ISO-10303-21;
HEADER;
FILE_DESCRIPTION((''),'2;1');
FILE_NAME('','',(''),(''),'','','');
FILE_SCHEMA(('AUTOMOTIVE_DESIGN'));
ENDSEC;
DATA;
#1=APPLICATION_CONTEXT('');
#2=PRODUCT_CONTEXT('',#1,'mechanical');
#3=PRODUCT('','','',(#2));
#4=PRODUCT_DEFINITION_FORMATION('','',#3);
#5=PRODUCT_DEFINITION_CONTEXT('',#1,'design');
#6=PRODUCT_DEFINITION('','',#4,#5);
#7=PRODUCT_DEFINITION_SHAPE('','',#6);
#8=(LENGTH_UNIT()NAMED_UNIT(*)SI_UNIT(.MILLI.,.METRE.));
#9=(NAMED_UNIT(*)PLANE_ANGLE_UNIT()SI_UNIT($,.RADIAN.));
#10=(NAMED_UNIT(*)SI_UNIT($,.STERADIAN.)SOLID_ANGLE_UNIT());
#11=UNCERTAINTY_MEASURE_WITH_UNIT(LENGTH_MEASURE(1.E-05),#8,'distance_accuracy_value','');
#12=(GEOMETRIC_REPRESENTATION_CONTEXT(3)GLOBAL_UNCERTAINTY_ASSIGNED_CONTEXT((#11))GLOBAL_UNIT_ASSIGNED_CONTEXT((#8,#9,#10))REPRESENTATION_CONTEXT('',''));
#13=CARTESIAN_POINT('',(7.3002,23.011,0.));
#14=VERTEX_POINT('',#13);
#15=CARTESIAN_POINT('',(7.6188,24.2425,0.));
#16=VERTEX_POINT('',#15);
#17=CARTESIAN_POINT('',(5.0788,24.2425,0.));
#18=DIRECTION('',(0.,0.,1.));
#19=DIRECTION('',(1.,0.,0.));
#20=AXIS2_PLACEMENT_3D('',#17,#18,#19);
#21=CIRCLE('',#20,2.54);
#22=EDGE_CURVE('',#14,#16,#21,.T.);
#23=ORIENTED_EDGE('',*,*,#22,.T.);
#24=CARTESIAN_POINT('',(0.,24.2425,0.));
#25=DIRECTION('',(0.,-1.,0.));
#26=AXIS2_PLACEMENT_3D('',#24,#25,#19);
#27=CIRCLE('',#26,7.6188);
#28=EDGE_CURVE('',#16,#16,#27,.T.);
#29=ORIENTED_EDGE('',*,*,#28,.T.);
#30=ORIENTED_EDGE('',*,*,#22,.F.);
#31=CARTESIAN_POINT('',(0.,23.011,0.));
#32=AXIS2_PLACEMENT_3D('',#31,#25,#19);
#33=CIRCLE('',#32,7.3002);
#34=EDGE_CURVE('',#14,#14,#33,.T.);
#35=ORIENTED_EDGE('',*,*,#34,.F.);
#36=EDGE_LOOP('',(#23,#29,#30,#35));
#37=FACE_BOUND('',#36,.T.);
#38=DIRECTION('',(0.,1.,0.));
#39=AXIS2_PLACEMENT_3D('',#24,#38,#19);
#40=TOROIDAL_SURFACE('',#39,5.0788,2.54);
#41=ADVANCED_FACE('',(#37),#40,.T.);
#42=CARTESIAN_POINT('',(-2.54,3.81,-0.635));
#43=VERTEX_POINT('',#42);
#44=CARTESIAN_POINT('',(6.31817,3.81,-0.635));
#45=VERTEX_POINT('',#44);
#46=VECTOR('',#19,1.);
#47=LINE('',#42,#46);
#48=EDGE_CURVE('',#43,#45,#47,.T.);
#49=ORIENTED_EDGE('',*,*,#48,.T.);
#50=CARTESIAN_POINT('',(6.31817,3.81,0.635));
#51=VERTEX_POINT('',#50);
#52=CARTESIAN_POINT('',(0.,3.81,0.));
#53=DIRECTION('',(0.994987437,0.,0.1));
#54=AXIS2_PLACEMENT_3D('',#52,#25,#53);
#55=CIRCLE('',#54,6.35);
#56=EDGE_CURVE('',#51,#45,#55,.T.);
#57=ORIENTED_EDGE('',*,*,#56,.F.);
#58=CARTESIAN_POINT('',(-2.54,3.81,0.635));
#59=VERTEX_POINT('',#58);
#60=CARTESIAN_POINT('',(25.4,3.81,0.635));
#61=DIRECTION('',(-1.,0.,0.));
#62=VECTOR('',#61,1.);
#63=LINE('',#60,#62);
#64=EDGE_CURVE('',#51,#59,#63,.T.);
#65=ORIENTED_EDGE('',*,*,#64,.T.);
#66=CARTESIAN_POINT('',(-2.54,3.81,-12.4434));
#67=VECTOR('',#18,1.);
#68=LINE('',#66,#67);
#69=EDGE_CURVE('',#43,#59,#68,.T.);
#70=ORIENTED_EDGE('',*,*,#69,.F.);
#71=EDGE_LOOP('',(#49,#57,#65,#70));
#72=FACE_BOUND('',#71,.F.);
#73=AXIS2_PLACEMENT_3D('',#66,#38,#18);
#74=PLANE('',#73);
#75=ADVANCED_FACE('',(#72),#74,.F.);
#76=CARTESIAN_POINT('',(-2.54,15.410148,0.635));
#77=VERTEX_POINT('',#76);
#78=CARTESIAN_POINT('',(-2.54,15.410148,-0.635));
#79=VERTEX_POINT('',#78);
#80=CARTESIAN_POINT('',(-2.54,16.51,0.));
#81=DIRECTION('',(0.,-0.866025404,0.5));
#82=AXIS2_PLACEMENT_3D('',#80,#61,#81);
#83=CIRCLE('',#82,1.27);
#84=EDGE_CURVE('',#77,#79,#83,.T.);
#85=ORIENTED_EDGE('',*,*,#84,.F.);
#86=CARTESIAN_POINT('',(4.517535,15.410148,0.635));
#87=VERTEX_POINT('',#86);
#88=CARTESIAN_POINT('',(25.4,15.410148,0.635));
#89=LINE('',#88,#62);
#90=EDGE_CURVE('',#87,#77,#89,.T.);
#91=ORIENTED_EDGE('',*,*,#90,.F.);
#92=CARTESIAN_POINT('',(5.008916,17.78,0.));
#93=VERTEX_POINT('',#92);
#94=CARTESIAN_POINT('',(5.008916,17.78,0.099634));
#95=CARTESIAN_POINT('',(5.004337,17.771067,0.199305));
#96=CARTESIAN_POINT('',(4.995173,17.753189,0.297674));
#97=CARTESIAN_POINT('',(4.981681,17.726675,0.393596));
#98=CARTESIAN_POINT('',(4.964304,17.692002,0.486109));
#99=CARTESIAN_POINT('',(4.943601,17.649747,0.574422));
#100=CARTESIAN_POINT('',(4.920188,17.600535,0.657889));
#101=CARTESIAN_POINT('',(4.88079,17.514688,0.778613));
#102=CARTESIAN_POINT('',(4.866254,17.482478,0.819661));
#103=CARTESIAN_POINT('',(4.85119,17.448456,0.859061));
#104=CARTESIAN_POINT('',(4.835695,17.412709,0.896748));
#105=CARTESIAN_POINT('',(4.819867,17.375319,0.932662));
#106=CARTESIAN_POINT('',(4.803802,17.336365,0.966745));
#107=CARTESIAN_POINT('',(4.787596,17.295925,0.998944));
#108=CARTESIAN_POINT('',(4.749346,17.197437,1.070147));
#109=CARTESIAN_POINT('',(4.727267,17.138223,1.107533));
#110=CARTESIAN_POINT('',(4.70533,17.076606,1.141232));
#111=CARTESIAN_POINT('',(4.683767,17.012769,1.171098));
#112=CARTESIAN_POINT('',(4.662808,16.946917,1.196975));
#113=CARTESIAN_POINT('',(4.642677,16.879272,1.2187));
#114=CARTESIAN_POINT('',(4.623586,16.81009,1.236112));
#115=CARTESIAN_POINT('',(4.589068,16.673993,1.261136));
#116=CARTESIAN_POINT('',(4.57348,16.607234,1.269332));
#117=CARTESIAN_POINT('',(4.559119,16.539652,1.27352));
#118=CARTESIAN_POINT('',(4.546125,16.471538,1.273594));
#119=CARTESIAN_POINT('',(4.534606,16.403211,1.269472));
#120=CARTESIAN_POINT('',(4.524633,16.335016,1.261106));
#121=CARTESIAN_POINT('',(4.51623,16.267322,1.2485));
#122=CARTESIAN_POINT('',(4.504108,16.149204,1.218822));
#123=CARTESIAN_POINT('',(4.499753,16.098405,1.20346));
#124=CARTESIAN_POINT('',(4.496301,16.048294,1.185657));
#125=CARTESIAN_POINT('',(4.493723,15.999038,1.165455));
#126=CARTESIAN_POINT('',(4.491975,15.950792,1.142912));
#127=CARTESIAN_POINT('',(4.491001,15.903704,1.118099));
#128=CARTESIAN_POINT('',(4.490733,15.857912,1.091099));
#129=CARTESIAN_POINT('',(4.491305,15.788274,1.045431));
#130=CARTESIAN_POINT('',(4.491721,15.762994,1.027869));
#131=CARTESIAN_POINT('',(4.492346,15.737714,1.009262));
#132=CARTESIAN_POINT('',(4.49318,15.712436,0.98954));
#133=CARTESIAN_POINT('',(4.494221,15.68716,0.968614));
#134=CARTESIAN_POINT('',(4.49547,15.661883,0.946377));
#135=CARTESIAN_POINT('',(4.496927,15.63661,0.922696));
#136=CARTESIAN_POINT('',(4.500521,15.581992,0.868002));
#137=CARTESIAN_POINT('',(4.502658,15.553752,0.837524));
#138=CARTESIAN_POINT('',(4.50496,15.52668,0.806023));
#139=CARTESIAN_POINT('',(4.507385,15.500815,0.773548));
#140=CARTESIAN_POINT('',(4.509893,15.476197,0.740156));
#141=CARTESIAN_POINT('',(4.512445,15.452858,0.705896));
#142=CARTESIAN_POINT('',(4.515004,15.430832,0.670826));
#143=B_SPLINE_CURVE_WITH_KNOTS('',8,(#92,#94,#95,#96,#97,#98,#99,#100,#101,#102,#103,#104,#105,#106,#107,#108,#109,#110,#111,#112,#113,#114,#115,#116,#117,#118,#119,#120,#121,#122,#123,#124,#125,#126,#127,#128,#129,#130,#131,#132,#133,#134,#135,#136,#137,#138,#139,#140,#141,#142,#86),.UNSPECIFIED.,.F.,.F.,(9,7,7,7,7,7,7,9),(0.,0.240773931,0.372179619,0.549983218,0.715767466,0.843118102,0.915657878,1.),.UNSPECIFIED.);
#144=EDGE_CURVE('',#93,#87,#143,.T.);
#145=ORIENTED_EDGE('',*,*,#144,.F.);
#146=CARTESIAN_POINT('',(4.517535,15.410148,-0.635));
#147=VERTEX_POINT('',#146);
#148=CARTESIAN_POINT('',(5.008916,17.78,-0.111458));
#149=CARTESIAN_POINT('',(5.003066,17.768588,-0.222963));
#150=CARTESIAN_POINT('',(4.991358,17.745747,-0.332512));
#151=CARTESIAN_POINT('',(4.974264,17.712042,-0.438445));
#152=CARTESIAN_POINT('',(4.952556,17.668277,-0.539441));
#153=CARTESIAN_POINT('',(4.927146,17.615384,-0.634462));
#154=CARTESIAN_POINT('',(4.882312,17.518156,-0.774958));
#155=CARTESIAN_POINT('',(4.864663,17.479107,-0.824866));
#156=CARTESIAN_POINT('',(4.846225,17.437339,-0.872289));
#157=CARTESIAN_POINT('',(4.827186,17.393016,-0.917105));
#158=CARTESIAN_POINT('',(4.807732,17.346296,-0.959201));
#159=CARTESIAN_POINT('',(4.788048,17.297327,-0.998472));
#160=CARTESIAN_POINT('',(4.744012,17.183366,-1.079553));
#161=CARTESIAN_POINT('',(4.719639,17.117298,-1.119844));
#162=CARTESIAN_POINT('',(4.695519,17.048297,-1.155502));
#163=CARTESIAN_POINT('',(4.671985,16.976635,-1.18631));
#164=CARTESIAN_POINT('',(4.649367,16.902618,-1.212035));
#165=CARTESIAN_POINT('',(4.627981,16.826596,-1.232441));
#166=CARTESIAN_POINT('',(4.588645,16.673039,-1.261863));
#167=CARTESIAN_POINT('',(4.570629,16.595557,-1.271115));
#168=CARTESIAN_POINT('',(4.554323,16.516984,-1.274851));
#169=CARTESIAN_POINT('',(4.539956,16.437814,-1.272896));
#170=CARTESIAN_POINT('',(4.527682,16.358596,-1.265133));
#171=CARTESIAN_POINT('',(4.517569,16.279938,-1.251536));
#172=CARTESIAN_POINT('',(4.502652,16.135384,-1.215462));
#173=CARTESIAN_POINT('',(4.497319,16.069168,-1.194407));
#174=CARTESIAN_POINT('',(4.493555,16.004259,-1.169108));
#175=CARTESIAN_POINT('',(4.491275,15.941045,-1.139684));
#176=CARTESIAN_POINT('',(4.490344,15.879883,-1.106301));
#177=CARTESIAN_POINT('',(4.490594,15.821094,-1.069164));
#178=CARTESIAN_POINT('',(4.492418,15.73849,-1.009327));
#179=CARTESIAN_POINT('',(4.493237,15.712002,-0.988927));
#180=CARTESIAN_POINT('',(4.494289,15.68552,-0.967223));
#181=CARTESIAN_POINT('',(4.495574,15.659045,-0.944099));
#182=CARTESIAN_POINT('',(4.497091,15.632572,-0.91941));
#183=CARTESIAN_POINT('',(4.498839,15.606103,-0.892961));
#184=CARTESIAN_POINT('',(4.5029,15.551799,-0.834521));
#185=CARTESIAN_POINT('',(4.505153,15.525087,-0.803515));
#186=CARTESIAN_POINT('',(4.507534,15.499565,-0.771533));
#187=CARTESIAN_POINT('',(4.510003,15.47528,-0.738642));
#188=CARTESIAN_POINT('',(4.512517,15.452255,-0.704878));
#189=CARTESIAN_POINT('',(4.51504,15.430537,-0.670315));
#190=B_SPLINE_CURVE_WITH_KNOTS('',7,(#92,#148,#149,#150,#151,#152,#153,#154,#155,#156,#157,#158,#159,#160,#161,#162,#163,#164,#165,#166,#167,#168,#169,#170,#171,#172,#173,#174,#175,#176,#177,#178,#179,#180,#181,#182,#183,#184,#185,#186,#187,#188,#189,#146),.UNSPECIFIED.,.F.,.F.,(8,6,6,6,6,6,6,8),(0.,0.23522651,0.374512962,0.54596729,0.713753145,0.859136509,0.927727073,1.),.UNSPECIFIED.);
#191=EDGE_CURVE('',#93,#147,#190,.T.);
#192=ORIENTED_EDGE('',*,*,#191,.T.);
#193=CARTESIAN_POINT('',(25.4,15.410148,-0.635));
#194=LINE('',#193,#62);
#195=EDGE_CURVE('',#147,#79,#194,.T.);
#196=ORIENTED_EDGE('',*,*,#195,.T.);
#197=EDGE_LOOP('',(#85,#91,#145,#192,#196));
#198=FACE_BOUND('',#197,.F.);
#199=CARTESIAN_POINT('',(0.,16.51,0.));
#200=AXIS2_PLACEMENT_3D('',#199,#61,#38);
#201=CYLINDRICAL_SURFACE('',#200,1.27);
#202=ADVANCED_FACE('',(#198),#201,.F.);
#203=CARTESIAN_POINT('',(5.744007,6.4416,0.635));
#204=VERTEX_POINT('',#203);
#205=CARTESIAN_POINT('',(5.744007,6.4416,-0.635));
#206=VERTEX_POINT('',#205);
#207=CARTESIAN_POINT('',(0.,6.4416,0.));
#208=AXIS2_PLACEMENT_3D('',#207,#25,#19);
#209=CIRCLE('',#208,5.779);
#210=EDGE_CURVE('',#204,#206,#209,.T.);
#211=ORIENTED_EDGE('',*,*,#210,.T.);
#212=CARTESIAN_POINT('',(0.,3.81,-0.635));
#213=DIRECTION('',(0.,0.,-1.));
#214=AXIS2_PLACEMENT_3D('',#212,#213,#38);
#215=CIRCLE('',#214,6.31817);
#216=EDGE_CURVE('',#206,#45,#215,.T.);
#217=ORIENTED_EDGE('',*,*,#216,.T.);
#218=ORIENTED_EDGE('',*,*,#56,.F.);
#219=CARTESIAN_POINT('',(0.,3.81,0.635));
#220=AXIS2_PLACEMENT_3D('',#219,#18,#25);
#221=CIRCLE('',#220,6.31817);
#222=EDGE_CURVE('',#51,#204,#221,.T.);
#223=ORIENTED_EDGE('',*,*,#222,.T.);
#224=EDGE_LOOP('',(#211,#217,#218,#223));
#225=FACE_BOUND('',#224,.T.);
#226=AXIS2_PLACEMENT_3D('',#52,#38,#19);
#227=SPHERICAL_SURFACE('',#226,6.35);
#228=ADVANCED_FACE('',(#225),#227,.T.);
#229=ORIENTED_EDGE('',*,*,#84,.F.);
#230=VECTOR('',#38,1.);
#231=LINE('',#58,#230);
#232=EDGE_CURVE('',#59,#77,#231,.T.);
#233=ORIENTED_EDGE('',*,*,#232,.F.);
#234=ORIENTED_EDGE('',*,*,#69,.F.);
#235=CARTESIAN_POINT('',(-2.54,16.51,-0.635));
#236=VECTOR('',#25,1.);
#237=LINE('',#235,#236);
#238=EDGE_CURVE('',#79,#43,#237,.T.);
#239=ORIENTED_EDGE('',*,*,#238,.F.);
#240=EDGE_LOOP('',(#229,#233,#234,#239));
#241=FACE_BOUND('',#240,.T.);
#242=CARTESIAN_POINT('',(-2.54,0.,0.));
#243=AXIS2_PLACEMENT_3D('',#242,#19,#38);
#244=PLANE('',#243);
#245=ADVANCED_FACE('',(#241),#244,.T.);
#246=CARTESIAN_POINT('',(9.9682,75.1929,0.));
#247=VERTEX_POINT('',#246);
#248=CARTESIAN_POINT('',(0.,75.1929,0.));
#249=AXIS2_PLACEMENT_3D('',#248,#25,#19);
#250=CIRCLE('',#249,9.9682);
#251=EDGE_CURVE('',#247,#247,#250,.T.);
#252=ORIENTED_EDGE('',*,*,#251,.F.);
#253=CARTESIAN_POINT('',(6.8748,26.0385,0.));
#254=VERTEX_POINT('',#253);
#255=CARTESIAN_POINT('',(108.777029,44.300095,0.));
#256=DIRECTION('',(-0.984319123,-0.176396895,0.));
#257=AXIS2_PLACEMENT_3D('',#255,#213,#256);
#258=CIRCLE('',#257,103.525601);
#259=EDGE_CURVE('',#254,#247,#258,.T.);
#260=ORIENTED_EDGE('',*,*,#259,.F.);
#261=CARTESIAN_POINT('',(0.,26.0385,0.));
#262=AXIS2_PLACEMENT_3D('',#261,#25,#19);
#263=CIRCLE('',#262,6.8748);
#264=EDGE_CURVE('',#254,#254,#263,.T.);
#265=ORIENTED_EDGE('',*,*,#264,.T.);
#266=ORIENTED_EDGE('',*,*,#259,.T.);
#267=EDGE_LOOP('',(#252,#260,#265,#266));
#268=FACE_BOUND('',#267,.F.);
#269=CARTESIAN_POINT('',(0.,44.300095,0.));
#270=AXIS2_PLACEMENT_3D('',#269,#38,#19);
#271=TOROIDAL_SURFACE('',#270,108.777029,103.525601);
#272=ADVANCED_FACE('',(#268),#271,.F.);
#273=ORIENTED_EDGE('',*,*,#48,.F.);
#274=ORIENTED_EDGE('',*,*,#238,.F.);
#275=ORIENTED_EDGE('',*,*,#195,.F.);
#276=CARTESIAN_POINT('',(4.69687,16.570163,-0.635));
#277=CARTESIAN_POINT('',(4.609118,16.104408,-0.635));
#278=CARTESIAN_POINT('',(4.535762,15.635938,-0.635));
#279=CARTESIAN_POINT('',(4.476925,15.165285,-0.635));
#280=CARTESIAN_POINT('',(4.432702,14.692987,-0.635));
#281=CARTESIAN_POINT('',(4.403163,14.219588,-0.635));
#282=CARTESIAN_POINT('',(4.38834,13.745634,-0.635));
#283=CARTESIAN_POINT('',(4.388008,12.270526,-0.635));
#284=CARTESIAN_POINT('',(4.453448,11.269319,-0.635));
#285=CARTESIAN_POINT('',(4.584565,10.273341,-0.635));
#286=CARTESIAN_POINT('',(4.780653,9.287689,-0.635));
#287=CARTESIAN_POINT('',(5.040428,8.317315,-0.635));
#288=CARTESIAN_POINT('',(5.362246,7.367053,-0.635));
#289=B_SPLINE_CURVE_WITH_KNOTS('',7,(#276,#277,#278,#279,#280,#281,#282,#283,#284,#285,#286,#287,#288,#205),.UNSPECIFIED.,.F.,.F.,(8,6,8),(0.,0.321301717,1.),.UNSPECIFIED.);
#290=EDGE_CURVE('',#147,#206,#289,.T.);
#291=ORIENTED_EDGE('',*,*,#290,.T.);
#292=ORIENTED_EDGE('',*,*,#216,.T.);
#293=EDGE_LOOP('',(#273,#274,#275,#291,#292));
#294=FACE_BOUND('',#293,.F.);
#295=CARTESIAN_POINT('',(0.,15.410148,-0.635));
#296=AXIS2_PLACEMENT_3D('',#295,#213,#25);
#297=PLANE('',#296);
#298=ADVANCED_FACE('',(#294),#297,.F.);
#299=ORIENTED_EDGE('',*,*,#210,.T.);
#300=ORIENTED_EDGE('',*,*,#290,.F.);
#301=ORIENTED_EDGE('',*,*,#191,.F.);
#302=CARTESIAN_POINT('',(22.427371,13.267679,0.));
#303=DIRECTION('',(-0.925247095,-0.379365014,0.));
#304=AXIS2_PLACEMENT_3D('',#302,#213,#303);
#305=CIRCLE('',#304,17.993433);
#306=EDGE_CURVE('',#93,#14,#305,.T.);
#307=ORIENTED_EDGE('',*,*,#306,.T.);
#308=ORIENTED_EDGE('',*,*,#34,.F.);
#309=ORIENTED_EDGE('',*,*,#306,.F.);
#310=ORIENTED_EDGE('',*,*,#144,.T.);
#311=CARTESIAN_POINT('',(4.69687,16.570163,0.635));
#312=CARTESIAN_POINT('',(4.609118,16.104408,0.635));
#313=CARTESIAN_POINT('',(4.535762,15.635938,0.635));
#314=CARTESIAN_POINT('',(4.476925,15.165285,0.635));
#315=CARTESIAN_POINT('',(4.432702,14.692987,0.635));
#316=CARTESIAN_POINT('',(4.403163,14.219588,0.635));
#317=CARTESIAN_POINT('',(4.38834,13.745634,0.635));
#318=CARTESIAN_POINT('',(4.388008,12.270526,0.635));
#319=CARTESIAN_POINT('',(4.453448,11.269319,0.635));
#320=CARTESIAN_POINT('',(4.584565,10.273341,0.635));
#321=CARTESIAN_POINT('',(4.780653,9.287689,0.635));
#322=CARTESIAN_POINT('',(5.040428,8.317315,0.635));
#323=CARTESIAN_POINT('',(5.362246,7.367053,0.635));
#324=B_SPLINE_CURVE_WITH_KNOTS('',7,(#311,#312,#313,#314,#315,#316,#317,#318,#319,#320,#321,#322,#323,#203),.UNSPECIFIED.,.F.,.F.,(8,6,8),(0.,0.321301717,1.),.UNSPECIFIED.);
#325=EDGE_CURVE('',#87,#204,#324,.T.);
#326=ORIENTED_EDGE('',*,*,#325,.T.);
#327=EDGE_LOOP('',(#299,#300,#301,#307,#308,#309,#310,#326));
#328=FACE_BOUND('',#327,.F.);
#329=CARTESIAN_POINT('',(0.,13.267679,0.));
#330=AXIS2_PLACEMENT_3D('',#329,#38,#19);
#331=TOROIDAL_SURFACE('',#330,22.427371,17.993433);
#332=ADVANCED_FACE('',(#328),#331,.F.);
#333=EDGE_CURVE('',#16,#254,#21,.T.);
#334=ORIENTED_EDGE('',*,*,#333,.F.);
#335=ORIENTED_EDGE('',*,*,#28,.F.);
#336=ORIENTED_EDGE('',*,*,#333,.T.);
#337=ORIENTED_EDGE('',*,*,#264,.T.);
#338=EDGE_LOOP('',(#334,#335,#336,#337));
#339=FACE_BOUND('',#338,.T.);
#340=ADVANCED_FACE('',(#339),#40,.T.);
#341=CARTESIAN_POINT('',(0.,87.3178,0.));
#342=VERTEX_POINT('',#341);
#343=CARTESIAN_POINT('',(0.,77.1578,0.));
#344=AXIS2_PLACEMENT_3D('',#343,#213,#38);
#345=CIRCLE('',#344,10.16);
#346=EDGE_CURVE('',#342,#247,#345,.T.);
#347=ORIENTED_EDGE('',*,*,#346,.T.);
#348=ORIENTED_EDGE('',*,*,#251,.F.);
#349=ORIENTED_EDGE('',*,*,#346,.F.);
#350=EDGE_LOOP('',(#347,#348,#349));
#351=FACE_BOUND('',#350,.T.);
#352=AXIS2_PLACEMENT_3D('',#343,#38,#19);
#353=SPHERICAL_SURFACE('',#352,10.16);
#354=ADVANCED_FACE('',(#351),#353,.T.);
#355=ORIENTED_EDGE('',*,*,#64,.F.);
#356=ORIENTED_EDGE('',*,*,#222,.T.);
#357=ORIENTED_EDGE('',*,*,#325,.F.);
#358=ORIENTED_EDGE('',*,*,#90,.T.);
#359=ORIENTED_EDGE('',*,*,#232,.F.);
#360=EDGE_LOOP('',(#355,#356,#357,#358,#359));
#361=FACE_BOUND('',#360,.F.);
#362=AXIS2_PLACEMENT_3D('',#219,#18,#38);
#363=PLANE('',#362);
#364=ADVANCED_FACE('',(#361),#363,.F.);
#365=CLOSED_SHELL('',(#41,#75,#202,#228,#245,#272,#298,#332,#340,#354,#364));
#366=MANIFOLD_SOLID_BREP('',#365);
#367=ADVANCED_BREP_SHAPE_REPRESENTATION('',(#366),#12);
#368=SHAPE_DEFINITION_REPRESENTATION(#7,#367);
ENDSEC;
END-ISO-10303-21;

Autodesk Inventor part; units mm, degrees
ref_plane "YZ Plane" through (0, 0, 0) normal (1, 0, 0) x (0, 1, 0)
ref_plane "XZ Plane" through (0, 0, 0) normal (0, 1, 0) x (-1, 0, 0)
ref_plane "XY Plane" through (0, 0, 0) normal (0, 0, 1) x (1, 0, 0)
sketch "Sketch1" plane through (0, 0, 0) normal (0, 1, 0) x (-1, 0, 0)
  circle A0 centre (0, 0) radius 12.7
  line L0 (12.7, 12.7) -> (12.7, -12.7) construction
  line L1 (12.7, -12.7) -> (-12.7, -12.7) construction
  line L2 (-12.7, -12.7) -> (-12.7, 12.7) construction
  line L3 (-12.7, 12.7) -> (12.7, 12.7) construction
  circle A1 centre (0, 0) radius 12.1875
  circle A2 centre (0, 0) radius 11.5722
  line L4 (12.7, 0) -> (-28.224, 0)
  spline S0 degree 4 poles (7.5608, 0) (7.5871, -0.2498) (7.5716, -0.8639) (7.6635, -1.72) (7.771, -2.5827) (7.8796, -3.1444) (8.0283, -3.9996) (8.2528, -4.7367) (8.3389, -5.0369) (8.4927, -5.4299) (8.607, -5.7477) (8.7077, -5.9466) (8.7297, -6.0528) (8.7259, -6.1323) (8.6915, -6.2267) (8.6084, -6.3073) (8.4656, -6.4322) (8.3108, -6.5585) (7.9581, -6.8561) (7.7627, -7.0404) (7.5994, -7.1572) (7.2874, -7.4352) (7.0492, -7.6385) (6.8557, -7.7767) (6.6363, -7.9955) (6.5444, -8.04) (6.425, -8.09) (6.3049, -8.0852) (6.1612, -8.0439) (5.8673, -7.9243) (5.2047, -7.7184) (4.9544, -7.6282) (4.5834, -7.5418) (3.9869, -7.3825) (3.5585, -7.2836) (3.3261, -7.2353) (2.6639, -7.1283) (2.4923, -7.0851) (1.885, -7.0109) (1.2249, -6.9515) (0.9978, -6.9092) (-0.0967, -6.8274) (-0.0908, -6.8879) (-0.9888, -6.8956) (-1.4498, -6.994) (-2.157, -7.03) (-2.8755, -7.1861) (-3.3866, -7.2397) (-4.3934, -7.4794) (-4.8139, -7.612) (-5.3152, -7.7313) (-5.615, -7.8484) (-5.8655, -7.9444) (-6.1746, -8.0443) (-6.2691, -8.0783) (-6.3955, -8.0918) (-6.486, -8.0779) (-6.6705, -8.0058) (-6.661, -7.9168) (-6.8879, -7.7874) (-7.0089, -7.6489) (-7.1824, -7.5178) (-7.3229, -7.3873) (-7.5822, -7.175) (-7.7931, -7.0025) (-8.0826, -6.7466) (-8.2527, -6.613) (-8.4352, -6.4317) (-8.5724, -6.3549) (-8.667, -6.2237) (-8.6858, -6.2037) (-8.7162, -6.092) (-8.7131, -6.0317) (-8.695, -5.9554) (-8.5854, -5.7043) (-8.4697, -5.4626) (-8.3913, -5.2076) (-8.2879, -4.9538) (-8.1958, -4.6121) (-8.0468, -4.045) (-7.9725, -3.8304) (-7.7592, -2.661) (-7.6907, -2.1909) (-7.6151, -1.4373) (-7.564, -0.619) (-7.5516, -0.3428) (-7.5554, -0.0046) (-7.5638, 0) knots 0 0 0 0 0 0.039296 0.055908 0.073069 0.090127 0.10618 0.121509 0.134965 0.146316 0.15619 0.164179 0.170591 0.176443 0.182863 0.190407 0.199969 0.210544 0.221389 0.232964 0.244031 0.25516 0.266564 0.276442 0.284967 0.292352 0.298886 0.30652 0.31685 0.32851 0.341463 0.355682 0.368855 0.381917 0.395666 0.408085 0.420945 0.435034 0.448763 0.464427 0.47884 0.493305 0.508372 0.522986 0.539358 0.555691 0.57306 0.589942 0.605994 0.620829 0.633477 0.645128 0.655027 0.663676 0.671144 0.677933 0.684628 0.692084 0.700281 0.708721 0.71788 0.727519 0.737693 0.74871 0.760009 0.770972 0.781161 0.789961 0.797299 0.803676 0.809144 0.814179 0.820577 0.828361 0.837524 0.847989 0.859019 0.870721 0.882901 0.897625 0.913523 0.930287 0.948149 0.964022 0.978288 1 1 1 1 1
  spline S1 degree 4 poles (7.5608, 0) (7.5871, 0.2498) (7.5716, 0.8639) (7.6635, 1.72) (7.771, 2.5827) (7.8796, 3.1444) (8.0283, 3.9996) (8.2528, 4.7367) (8.3389, 5.0368) (8.4927, 5.4299) (8.607, 5.7477) (8.7077, 5.9466) (8.7297, 6.0528) (8.7259, 6.1323) (8.6915, 6.2267) (8.6084, 6.3073) (8.4656, 6.4322) (8.3108, 6.5585) (7.9581, 6.8561) (7.7627, 7.0404) (7.5994, 7.1572) (7.2874, 7.4352) (7.0492, 7.6385) (6.8557, 7.7767) (6.6363, 7.9955) (6.5444, 8.04) (6.425, 8.09) (6.3049, 8.0852) (6.1612, 8.0439) (5.8673, 7.9243) (5.2047, 7.7184) (4.9544, 7.6282) (4.5834, 7.5418) (3.9869, 7.3825) (3.5585, 7.2836) (3.3261, 7.2353) (2.6639, 7.1283) (2.4923, 7.0851) (1.885, 7.0109) (1.2249, 6.9515) (0.9978, 6.9092) (-0.0967, 6.8274) (-0.0908, 6.8879) (-0.9888, 6.8956) (-1.4498, 6.994) (-2.157, 7.03) (-2.8755, 7.1861) (-3.3866, 7.2397) (-4.3934, 7.4794) (-4.8139, 7.612) (-5.3152, 7.7313) (-5.615, 7.8484) (-5.8655, 7.9444) (-6.1746, 8.0443) (-6.2691, 8.0783) (-6.3955, 8.0918) (-6.486, 8.0779) (-6.6705, 8.0058) (-6.661, 7.9168) (-6.8879, 7.7874) (-7.0089, 7.6489) (-7.1824, 7.5178) (-7.3229, 7.3873) (-7.5822, 7.175) (-7.7931, 7.0025) (-8.0826, 6.7466) (-8.2527, 6.613) (-8.4352, 6.4317) (-8.5724, 6.3549) (-8.667, 6.2237) (-8.6858, 6.2037) (-8.7162, 6.092) (-8.7131, 6.0317) (-8.695, 5.9554) (-8.5854, 5.7043) (-8.4697, 5.4626) (-8.3913, 5.2076) (-8.2879, 4.9538) (-8.1958, 4.6121) (-8.0468, 4.045) (-7.9725, 3.8304) (-7.7592, 2.661) (-7.6907, 2.1909) (-7.6151, 1.4373) (-7.564, 0.619) (-7.5516, 0.3428) (-7.5554, 0.0046) (-7.5638, 0) knots 0 0 0 0 0 0.039296 0.055908 0.073069 0.090127 0.10618 0.121509 0.134965 0.146316 0.15619 0.164179 0.170591 0.176443 0.182863 0.190407 0.199969 0.210544 0.221389 0.232964 0.244031 0.25516 0.266564 0.276442 0.284967 0.292352 0.298886 0.30652 0.31685 0.32851 0.341463 0.355682 0.368855 0.381917 0.395666 0.408085 0.420945 0.435034 0.448763 0.464427 0.47884 0.493305 0.508372 0.522986 0.539358 0.555691 0.57306 0.589942 0.605994 0.620829 0.633477 0.645128 0.655027 0.663676 0.671144 0.677933 0.684628 0.692084 0.700281 0.708721 0.71788 0.727519 0.737693 0.74871 0.760009 0.770972 0.781161 0.789961 0.797299 0.803676 0.809144 0.814179 0.820577 0.828361 0.837524 0.847989 0.859019 0.870721 0.882901 0.897625 0.913523 0.930287 0.948149 0.964022 0.978288 1 1 1 1 1
  spline S2 degree 4 poles (6.6698, 0) (6.6871, -0.3978) (6.6713, -0.7815) (6.7409, -1.5229) (6.8536, -2.5936) (6.9252, -2.906) (7.0997, -3.8444) (7.2267, -4.3825) (7.3633, -4.7956) (7.4896, -5.3512) (7.6112, -5.5391) (7.6677, -5.7689) (7.6975, -5.7897) (7.7062, -5.8965) (7.6285, -5.9815) (7.572, -6.0514) (7.3996, -6.178) (7.1331, -6.4178) (6.9588, -6.5681) (6.6364, -6.8323) (6.5004, -6.9541) (6.3704, -7.0647) (6.3037, -7.1086) (6.2234, -7.1388) (6.1631, -7.1283) (6.0268, -7.0924) (5.9076, -7.0514) (5.5806, -6.952) (5.3855, -6.8908) (5.038, -6.812) (4.9484, -6.7624) (4.2814, -6.6028) (4.0156, -6.5429) (3.8882, -6.5183) (3.3037, -6.3965) (2.8824, -6.3286) (2.5502, -6.2731) (2.4025, -6.2241) (1.6246, -6.1518) (1.37, -6.0874) (1.1134, -6.1) (0.6072, -6.0267) (0.5913, -6.054) (0.1833, -6.0225) (0.0815, -6.0123) (-0.2846, -6.0335) (-0.5883, -6.0362) (-0.9225, -6.0806) (-1.3996, -6.1121) (-1.6329, -6.1378) (-2.1126, -6.197) (-2.4639, -6.2503) (-2.782, -6.3007) (-3.1586, -6.3702) (-3.2077, -6.3787) (-3.7538, -6.4818) (-4.0918, -6.5436) (-4.3482, -6.6242) (-4.8814, -6.7303) (-5.2054, -6.8556) (-5.5087, -6.9063) (-5.6572, -6.9822) (-5.9526, -7.0706) (-6.1139, -7.1317) (-6.1762, -7.1269) (-6.2789, -7.1205) (-6.425, -7.0257) (-6.5484, -6.9167) (-6.706, -6.7703) (-6.9687, -6.5457) (-7.0919, -6.4669) (-7.3885, -6.1958) (-7.4865, -6.1263) (-7.6283, -5.9822) (-7.6822, -5.9316) (-7.7081, -5.8596) (-7.7006, -5.7637) (-7.6112, -5.6344) (-7.5282, -5.3549) (-7.4652, -5.1836) (-7.3295, -4.7829) (-7.1819, -4.1547) (-7.1117, -3.848) (-6.9524, -3.2013) (-6.8781, -2.6524) (-6.8463, -2.4403) (-6.7659, -1.8396) (-6.735, -1.4493) (-6.7089, -1.1731) (-6.6784, -0.6337) (-6.6716, -0.3941) (-6.6731, -0.0474) (-6.6763, 0) knots 0 0 0 0 0 0.039448 0.055349 0.072269 0.088737 0.104506 0.120552 0.134467 0.146293 0.155548 0.162505 0.168442 0.174025 0.180717 0.189099 0.198791 0.210185 0.221737 0.232089 0.240921 0.247815 0.253612 0.259204 0.265359 0.273108 0.282299 0.292472 0.302955 0.314654 0.326295 0.337305 0.349803 0.361846 0.37389 0.386284 0.399242 0.411449 0.423896 0.437159 0.44785 0.458402 0.468238 0.477683 0.488335 0.499312 0.51153 0.523717 0.536339 0.54908 0.561517 0.573881 0.584661 0.595665 0.606838 0.61814 0.631344 0.644301 0.656608 0.668396 0.679342 0.688982 0.697238 0.704622 0.711137 0.717919 0.725945 0.735426 0.745345 0.756153 0.766663 0.776344 0.78489 0.791619 0.7976 0.803458 0.810655 0.819014 0.829148 0.841433 0.854403 0.869138 0.884301 0.898105 0.912368 0.925751 0.938316 0.951323 0.9634 0.975086 1 1 1 1 1
  spline S3 degree 4 poles (6.6698, 0) (6.6871, 0.3978) (6.6713, 0.7814) (6.7409, 1.5229) (6.8536, 2.5936) (6.9252, 2.906) (7.0997, 3.8444) (7.2267, 4.3825) (7.3633, 4.7956) (7.4896, 5.3512) (7.6112, 5.5391) (7.6677, 5.7689) (7.6975, 5.7897) (7.7062, 5.8965) (7.6285, 5.9815) (7.572, 6.0514) (7.3996, 6.178) (7.1331, 6.4178) (6.9588, 6.5681) (6.6364, 6.8323) (6.5004, 6.9541) (6.3704, 7.0646) (6.3037, 7.1085) (6.2234, 7.1388) (6.1631, 7.1283) (6.0268, 7.0924) (5.9076, 7.0514) (5.5806, 6.952) (5.3855, 6.8908) (5.038, 6.812) (4.9484, 6.7624) (4.2814, 6.6028) (4.0156, 6.5429) (3.8882, 6.5183) (3.3037, 6.3965) (2.8824, 6.3286) (2.5502, 6.2731) (2.4025, 6.2241) (1.6246, 6.1517) (1.37, 6.0874) (1.1134, 6.1) (0.6072, 6.0267) (0.5913, 6.054) (0.1833, 6.0225) (0.0815, 6.0123) (-0.2846, 6.0335) (-0.5883, 6.0362) (-0.9225, 6.0806) (-1.3996, 6.1121) (-1.6329, 6.1378) (-2.1126, 6.197) (-2.4639, 6.2503) (-2.782, 6.3007) (-3.1586, 6.3702) (-3.2077, 6.3787) (-3.7538, 6.4818) (-4.0918, 6.5436) (-4.3482, 6.6242) (-4.8814, 6.7303) (-5.2054, 6.8556) (-5.5087, 6.9063) (-5.6572, 6.9822) (-5.9526, 7.0706) (-6.1139, 7.1317) (-6.1762, 7.1269) (-6.2789, 7.1205) (-6.425, 7.0257) (-6.5484, 6.9166) (-6.706, 6.7703) (-6.9687, 6.5457) (-7.0919, 6.4669) (-7.3885, 6.1958) (-7.4865, 6.1263) (-7.6283, 5.9822) (-7.6822, 5.9316) (-7.7081, 5.8596) (-7.7006, 5.7637) (-7.6112, 5.6344) (-7.5282, 5.3549) (-7.4652, 5.1836) (-7.3295, 4.7829) (-7.1819, 4.1547) (-7.1117, 3.848) (-6.9524, 3.2013) (-6.8781, 2.6524) (-6.8463, 2.4403) (-6.7659, 1.8396) (-6.735, 1.4493) (-6.7089, 1.1731) (-6.6784, 0.6337) (-6.6716, 0.3941) (-6.6731, 0.0474) (-6.6763, 0) knots 0 0 0 0 0 0.039448 0.055349 0.072269 0.088737 0.104506 0.120552 0.134467 0.146293 0.155548 0.162505 0.168442 0.174025 0.180717 0.189099 0.198791 0.210185 0.221737 0.232089 0.240921 0.247815 0.253612 0.259204 0.265359 0.273108 0.282299 0.292472 0.302955 0.314654 0.326295 0.337305 0.349803 0.361846 0.37389 0.386284 0.399242 0.411449 0.423896 0.437159 0.44785 0.458402 0.468238 0.477683 0.488335 0.499312 0.51153 0.523717 0.536339 0.54908 0.561517 0.573881 0.584661 0.595665 0.606838 0.61814 0.631344 0.644301 0.656608 0.668396 0.679342 0.688982 0.697238 0.704622 0.711137 0.717919 0.725945 0.735426 0.745345 0.756153 0.766663 0.776344 0.78489 0.791619 0.7976 0.803458 0.810655 0.819014 0.829148 0.841433 0.854403 0.869138 0.884301 0.898105 0.912368 0.925751 0.938316 0.951323 0.9634 0.975086 1 1 1 1 1
  line L5 (1.0941, 0) -> (1.0941, -2.0952)
  line L6 (1.0941, -2.0952) -> (3.9049, -2.2474)
  line L7 (3.9049, -2.2474) -> (4.7904, -1.5612)
  line L8 (-0.5884, 0) -> (-0.5898, -1.9938)
  line L9 (-0.5898, -1.9938) -> (-4.3298, -1.7894)
  line L10 (-4.3298, -1.7894) -> (-5.2324, -1.0809)
  line L11 (5.0927, -1.7005) -> (5.1051, -4.9152)
  line L12 (4.7853, -5.0014) -> (3.8243, -3.9243)
  line L13 (3.8243, -3.9243) -> (-4.2884, -3.485)
  line L14 (-4.2884, -3.485) -> (-5.2324, -4.5455)
  line L15 (-5.5377, -4.4469) -> (-5.5322, -1.2345)
  arc A3 (5.0927, -1.7005) -> (4.7904, -1.5612) centre (4.931, -1.6537) ccw
  arc A4 (4.7853, -5.0014) -> (5.1051, -4.9152) centre (4.9338, -4.9158) ccw
  arc A5 (-5.5377, -4.4469) -> (-5.2324, -4.5455) centre (-5.3693, -4.4472) ccw
  arc A6 (-5.2324, -1.0809) -> (-5.5322, -1.2345) centre (-5.368, -1.1857) ccw
  line L16 (1.0941, 0) -> (1.0941, 2.0952)
  line L17 (1.0941, 2.0952) -> (3.9049, 2.2474)
  line L18 (3.9049, 2.2474) -> (4.7904, 1.5612)
  line L19 (-0.5884, 0) -> (-0.5898, 1.9938)
  line L20 (-0.5898, 1.9938) -> (-4.3298, 1.7894)
  line L21 (-4.3298, 1.7894) -> (-5.2324, 1.0809)
  line L22 (5.0927, 1.7005) -> (5.1051, 4.9152)
  line L23 (4.7853, 5.0014) -> (3.8243, 3.9243)
  line L24 (3.8243, 3.9243) -> (-4.2884, 3.485)
  line L25 (-4.2884, 3.485) -> (-5.2324, 4.5455)
  arc A7 (4.7904, 1.5612) -> (5.0927, 1.7005) centre (4.931, 1.6537) ccw
  arc A8 (5.1051, 4.9152) -> (4.7853, 5.0014) centre (4.9338, 4.9158) ccw
  arc A9 (-5.2324, 4.5455) -> (-5.5377, 4.4469) centre (-5.3693, 4.4472) ccw
  arc A10 (-5.5322, 1.2345) -> (-5.2324, 1.0809) centre (-5.368, 1.1857) ccw
  line L26 (-5.5377, 4.4469) -> (-5.5322, 1.2345)
  point P0 (7.582, -0.4475)
  point P1 (7.6181, -1.1897)
  point P2 (7.6938, -1.9478)
  point P3 (7.7753, -2.5562)
  point P4 (7.8781, -3.1491)
  point P5 (8.0672, -4.0731)
  point P6 (8.2624, -4.7725)
  point P7 (8.3673, -5.0974)
  point P8 (8.5065, -5.4722)
  point P9 (8.6396, -5.8063)
  point P10 (8.7107, -5.9813)
  point P11 (8.7259, -6.0648)
  point P12 (8.7208, -6.1314)
  point P13 (8.6916, -6.2086)
  point P14 (8.625, -6.2893)
  point P15 (8.5035, -6.398)
  point P16 (8.3259, -6.5472)
  point P17 (7.9666, -6.8536)
  point P18 (7.7597, -7.0347)
  point P19 (7.5972, -7.1666)
  point P20 (7.2997, -7.4223)
  point P21 (7.0358, -7.6431)
  point P22 (6.8133, -7.8257)
  point P23 (6.615, -7.9971)
  point P24 (6.5232, -8.0478)
  point P25 (6.4269, -8.0794)
  point P26 (6.3307, -8.0824)
  point P27 (6.2157, -8.0568)
  point P28 (5.939, -7.9581)
  point P29 (5.2485, -7.7291)
  point P30 (4.9341, -7.6303)
  point P31 (4.5863, -7.5395)
  point P32 (3.9767, -7.3836)
  point P33 (3.5714, -7.2881)
  point P34 (3.2721, -7.2292)
  point P35 (2.7391, -7.1371)
  point P36 (2.4628, -7.0879)
  point P37 (1.9303, -7.0199)
  point P38 (1.3001, -6.9537)
  point P39 (0.8618, -6.905)
  point P40 (0.0288, -6.8555)
  point P41 (-0.2052, -6.8728)
  point P42 (-0.8545, -6.91)
  point P43 (-1.4645, -6.978)
  point P44 (-2.1388, -7.0515)
  point P45 (-2.824, -7.1641)
  point P46 (-3.4525, -7.2709)
  point P47 (-4.4053, -7.4924)
  point P48 (-4.9149, -7.6324)
  point P49 (-5.3455, -7.7526)
  point P50 (-5.6379, -7.8568)
  point P51 (-5.9277, -7.9626)
  point P52 (-6.1933, -8.0512)
  point P53 (-6.2931, -8.0776)
  point P54 (-6.3884, -8.0863)
  point P55 (-6.4903, -8.0706)
  point P56 (-6.6308, -8.0034)
  point P57 (-6.6877, -7.9317)
  point P58 (-6.8516, -7.7973)
  point P59 (-7.0164, -7.6529)
  point P60 (-7.1659, -7.5263)
  point P61 (-7.3162, -7.3971)
  point P62 (-7.5527, -7.1992)
  point P63 (-7.8063, -6.9879)
  point P64 (-8.0883, -6.7461)
  point P65 (-8.2789, -6.5822)
  point P66 (-8.4597, -6.4263)
  point P67 (-8.5958, -6.3127)
  point P68 (-8.6662, -6.2262)
  point P69 (-8.6877, -6.1869)
  point P70 (-8.71, -6.101)
  point P71 (-8.7118, -6.043)
  point P72 (-8.6987, -5.9829)
  point P73 (-8.6117, -5.7675)
  point P74 (-8.4802, -5.4672)
  point P75 (-8.3902, -5.2184)
  point P76 (-8.3037, -4.977)
  point P77 (-8.2036, -4.6385)
  point P78 (-8.0738, -4.1578)
  point P79 (-7.9798, -3.7988)
  point P80 (-7.7876, -2.7953)
  point P81 (-7.688, -2.1188)
  point P82 (-7.614, -1.3524)
  point P83 (-7.5689, -0.6701)
  point P84 (-7.5559, -0.2905)
  point P85 (-7.5591, -0.0322)
  point P86 (7.582, 0.4475)
  point P87 (7.6181, 1.1897)
  point P88 (7.6938, 1.9478)
  point P89 (7.7753, 2.5562)
  point P90 (7.8781, 3.1491)
  point P91 (8.0672, 4.0731)
  point P92 (8.2624, 4.7725)
  point P93 (8.3673, 5.0973)
  point P94 (8.5065, 5.4722)
  point P95 (8.6396, 5.8063)
  point P96 (8.7107, 5.9813)
  point P97 (8.7259, 6.0648)
  point P98 (8.7208, 6.1314)
  point P99 (8.6916, 6.2085)
  point P100 (8.625, 6.2893)
  point P101 (8.5035, 6.398)
  point P102 (8.3259, 6.5472)
  point P103 (7.9666, 6.8536)
  point P104 (7.7597, 7.0347)
  point P105 (7.5972, 7.1666)
  point P106 (7.2997, 7.4223)
  point P107 (7.0358, 7.6431)
  point P108 (6.8133, 7.8257)
  point P109 (6.615, 7.997)
  point P110 (6.5232, 8.0478)
  point P111 (6.4269, 8.0794)
  point P112 (6.3307, 8.0824)
  point P113 (6.2157, 8.0568)
  point P114 (5.939, 7.9581)
  point P115 (5.2485, 7.7291)
  point P116 (4.9341, 7.6303)
  point P117 (4.5863, 7.5395)
  point P118 (3.9767, 7.3836)
  point P119 (3.5714, 7.2881)
  point P120 (3.2721, 7.2292)
  point P121 (2.7391, 7.1371)
  point P122 (2.4628, 7.0879)
  point P123 (1.9303, 7.0199)
  point P124 (1.3001, 6.9537)
  point P125 (0.8618, 6.905)
  point P126 (0.0288, 6.8555)
  point P127 (-0.2052, 6.8727)
  point P128 (-0.8545, 6.91)
  point P129 (-1.4645, 6.978)
  point P130 (-2.1388, 7.0515)
  point P131 (-2.824, 7.1641)
  point P132 (-3.4525, 7.2709)
  point P133 (-4.4053, 7.4924)
  point P134 (-4.9149, 7.6324)
  point P135 (-5.3455, 7.7526)
  point P136 (-5.6379, 7.8568)
  point P137 (-5.9277, 7.9626)
  point P138 (-6.1933, 8.0512)
  point P139 (-6.2931, 8.0776)
  point P140 (-6.3884, 8.0863)
  point P141 (-6.4903, 8.0706)
  point P142 (-6.6308, 8.0034)
  point P143 (-6.6877, 7.9317)
  point P144 (-6.8516, 7.7973)
  point P145 (-7.0164, 7.6529)
  point P146 (-7.1659, 7.5263)
  point P147 (-7.3162, 7.3971)
  point P148 (-7.5527, 7.1992)
  point P149 (-7.8063, 6.9879)
  point P150 (-8.0883, 6.746)
  point P151 (-8.2789, 6.5822)
  point P152 (-8.4597, 6.4263)
  point P153 (-8.5958, 6.3127)
  point P154 (-8.6662, 6.2262)
  point P155 (-8.6877, 6.1869)
  point P156 (-8.71, 6.101)
  point P157 (-8.7118, 6.043)
  point P158 (-8.6987, 5.9829)
  point P159 (-8.6117, 5.7675)
  point P160 (-8.4802, 5.4672)
  point P161 (-8.3902, 5.2183)
  point P162 (-8.3037, 4.977)
  point P163 (-8.2036, 4.6385)
  point P164 (-8.0738, 4.1578)
  point P165 (-7.9798, 3.7987)
  point P166 (-7.7876, 2.7953)
  point P167 (-7.688, 2.1188)
  point P168 (-7.614, 1.3524)
  point P169 (-7.5689, 0.6701)
  point P170 (-7.5559, 0.2905)
  point P171 (-7.5591, 0.0322)
  point P172 (6.6836, -0.5412)
  point P173 (6.7072, -1.0761)
  point P174 (6.774, -1.8261)
  point P175 (6.8568, -2.5341)
  point P176 (6.9346, -2.9728)
  point P177 (7.1026, -3.8229)
  point P178 (7.2446, -4.4136)
  point P179 (7.3804, -4.8955)
  point P180 (7.5322, -5.3935)
  point P181 (7.6322, -5.6381)
  point P182 (7.6779, -5.7675)
  point P183 (7.6936, -5.8064)
  point P184 (7.6937, -5.8803)
  point P185 (7.6435, -5.9655)
  point P186 (7.5821, -6.0322)
  point P187 (7.446, -6.1471)
  point P188 (7.1705, -6.3831)
  point P189 (6.9233, -6.5957)
  point P190 (6.6151, -6.8536)
  point P191 (6.4599, -6.9878)
  point P192 (6.3548, -7.0726)
  point P193 (6.2905, -7.111)
  point P194 (6.2287, -7.1307)
  point P195 (6.1718, -7.1283)
  point P196 (6.068, -7.1023)
  point P197 (5.9271, -7.0591)
  point P198 (5.6207, -6.9639)
  point P199 (5.36, -6.8886)
  dimension "d0" = 25.4
  dimension "d32" = 25.4
  dimension "d39" = 25.4
extrude "Extrusion1" add sketch "Sketch1" along normal blind 1.905 contours L4 A2 A1 | A1 L4 A2 | S0 L4 S2 | L4 S3 S1 | L5 L6 L7 A3 L11 A4 L12 L13 L14 A5 L15 A6 L10 L9 L8 L4 | L4 L19 L20 L21 A10 L26 A9 L25 L24 L23 A8 L22 A7 L18 L17 L16
sketch "Sketch2" plane through (0, 1.905, 0) normal (0, 1, 0) x (1, 0, 0)
  line L0 (12.7067, 12.7) -> (12.7067, -12.7) construction
  line L1 (12.7067, -12.7) -> (-12.6933, -12.7) construction
  line L2 (-12.6933, -12.7) -> (-12.6933, 12.7) construction
  line L3 (-12.6933, 12.7) -> (12.7067, 12.7) construction
  circle A0 centre (0, 0) radius 12.1875 projected
  line L4 (-12.1875, 0) -> (-18.0724, 0)
  circle A1 centre (0, 0) radius 12.7
  dimension "d92" = 25.4
  dimension "d98" = 25.4
extrude "Extrusion2" add sketch "Sketch2" along normal blind 1.905 contours A0 | A1
sketch "Sketch3" plane through (0, 0, 0) normal (0, 0, 1) x (1, 0, 0)
  line L0 (0, 0) -> (0, 88.9)
  line L1 (134.3126, 257.1223) -> (473.4262, 257.1223) construction
  line L2 (473.4262, 257.1223) -> (473.4262, 17.1036) construction
  line L3 (473.4262, 17.1036) -> (134.3126, 17.1036) construction
  line L4 (134.3126, 17.1036) -> (134.3126, 257.1223) construction
  circle A0 centre (112.6944, 39.6279) radius 12.7
  circle A1 centre (0, 44.45) radius 5.08
  circle A2 centre (0, 77.1578) radius 10.16
  line L5 (0, 44.45) -> (0, 3.81)
  line L6 (12.7, 3.81) -> (-12.7, 3.81) projected
  circle A3 centre (0, 24.13) radius 5.08
  circle A4 centre (5.0788, 24.2425) radius 2.54
  circle A5 centre (-4.9792, 23.1233) radius 2.54
  line L7 (-4.9792, 23.1233) -> (-13.9595, 32.1035)
  line L8 (-4.9792, 23.1233) -> (7.7208, 23.1233) construction
  line L9 (5.0788, 24.2425) -> (14.059, 33.2227)
  line L10 (5.0788, 24.2425) -> (17.7788, 24.2425) construction
  line L11 (5.0788, 24.2425) -> (12.9329, 19.8885)
  line L12 (-4.9792, 23.1233) -> (-13.9595, 14.143)
  line L13 (-4.9792, 23.1233) -> (7.7208, 23.1233) construction
  arc A6 (9.9682, 75.1929) -> (6.8748, 26.0385) centre (108.777, 44.3001) ccw
  arc A7 (-6.7753, 24.9193) -> (-9.9499, 75.1021) centre (-109.0911, 43.6386) ccw
  circle A8 centre (0, 3.81) radius 6.35
  line L14 (0, 24.13) -> (0, 3.81)
  circle A9 centre (0, 13.97) radius 4.445
  arc A10 (-6.35, 3.81) -> (-6.7753, 21.3272) centre (-23.0464, 12.1684) ccw
  arc A11 (7.3002, 23.011) -> (5.779, 6.4416) centre (22.4276, 13.2676) ccw
  point P0 (0, 87.3178)
  point P1 (0, 3.81)
  point P2 (6.35, 3.81)
  dimension "d101" = 88.9
  dimension "d103" = 25.4
  dimension "d118" = 10.16
  dimension "d122" = 20.32
  dimension "d123" = 10.16
  dimension "d124" = 5.08
  dimension "d125" = 5.08
  dimension "d126" = 12.7
  dimension "d127" = 135
  dimension "d128" = 12.7
  dimension "d129" = 45
  dimension "d130" = 12.7
  dimension "d131" = 135
  dimension "d132" = 12.7
  dimension "d133" = 8.89
revolve "Revolution1" add sketch "Sketch3" angle 360 about axis through (0, 44.45, 0) along (0, -1, 0) picked at (0.2042, 9.7508) picked at (0.3297, 15.6262) picked at (3.3442, 44.0732) contours L0 A9 A8 L6 | L0 A8 A9 | L0 A9 A8 | A9 A11 A8 | L0 A3 A4 A11 A9 | L0 A3 A4 | A4 A3 L11 A11 | A4 A3 | L11 L9 A4 | L0 A1 A2 A6 A4 A3 | A4 L9 A3 | L0 A1 | A2 L0 A6
sketch "Sketch4" plane through (0, 0, 0) normal (1, 0, 0) x (0, 1, 0)
  line L0 (3.81, 6.35) -> (3.81, -6.35) projected
  line L1 (3.81, 0) -> (16.51, 0)
  line L2 (16.51, 0) -> (16.51, -0.635)
  line L3 (16.51, -0.635) -> (3.81, -0.635)
  line L4 (3.81, -0.635) -> (3.81, 0)
  line L5 (16.51, -0.635) -> (3.81, -0.635)
  line L6 (3.81, -0.635) -> (3.81, 0.635)
  line L7 (3.81, 0.635) -> (16.51, 0.635)
  line L8 (16.51, 0.635) -> (16.51, -0.635)
  circle A0 centre (16.51, 0) radius 1.27
  line L9 (-3.1465, 21.592) -> (3.81, 21.592)
  line L10 (3.81, 21.592) -> (3.81, -19.2527)
  line L11 (3.81, -19.2527) -> (-3.1465, -19.2527)
  line L12 (-3.1465, -19.2527) -> (-3.1465, 21.592)
  point P0 (0, 0)
  point P1 (15.4101, 0.635)
  point P2 (15.4101, -0.635)
  dimension "d136" = 12.7
  dimension "d137" = 0.635
  dimension "d138" = 12.7
  dimension "d139" = 1.27
  dimension "d140" = 2.54
extrude "Extrusion3" cut sketch "Sketch4" along normal blind 25.4 and the other way blind 2.54
sketch "Sketch6" plane through (-2.54, 0, 0) normal (1, 0, 0) x (0, 0, -1)
  line L0 (12.4434, 3.81) -> (-12.4434, 3.81) projected
  line L1 (-23.003, -7.9462) -> (12.4434, -7.9462)
  line L2 (12.4434, -7.9462) -> (12.4434, 3.81)
  line L3 (12.4434, 3.81) -> (-23.003, 3.81)
  line L4 (-23.003, 3.81) -> (-23.003, -7.9462)
  point P0 (0, 0)
extrude "Extrusion4" cut sketch "Sketch6" against normal blind 25.4
properties part number "Basic seal circle handel"
